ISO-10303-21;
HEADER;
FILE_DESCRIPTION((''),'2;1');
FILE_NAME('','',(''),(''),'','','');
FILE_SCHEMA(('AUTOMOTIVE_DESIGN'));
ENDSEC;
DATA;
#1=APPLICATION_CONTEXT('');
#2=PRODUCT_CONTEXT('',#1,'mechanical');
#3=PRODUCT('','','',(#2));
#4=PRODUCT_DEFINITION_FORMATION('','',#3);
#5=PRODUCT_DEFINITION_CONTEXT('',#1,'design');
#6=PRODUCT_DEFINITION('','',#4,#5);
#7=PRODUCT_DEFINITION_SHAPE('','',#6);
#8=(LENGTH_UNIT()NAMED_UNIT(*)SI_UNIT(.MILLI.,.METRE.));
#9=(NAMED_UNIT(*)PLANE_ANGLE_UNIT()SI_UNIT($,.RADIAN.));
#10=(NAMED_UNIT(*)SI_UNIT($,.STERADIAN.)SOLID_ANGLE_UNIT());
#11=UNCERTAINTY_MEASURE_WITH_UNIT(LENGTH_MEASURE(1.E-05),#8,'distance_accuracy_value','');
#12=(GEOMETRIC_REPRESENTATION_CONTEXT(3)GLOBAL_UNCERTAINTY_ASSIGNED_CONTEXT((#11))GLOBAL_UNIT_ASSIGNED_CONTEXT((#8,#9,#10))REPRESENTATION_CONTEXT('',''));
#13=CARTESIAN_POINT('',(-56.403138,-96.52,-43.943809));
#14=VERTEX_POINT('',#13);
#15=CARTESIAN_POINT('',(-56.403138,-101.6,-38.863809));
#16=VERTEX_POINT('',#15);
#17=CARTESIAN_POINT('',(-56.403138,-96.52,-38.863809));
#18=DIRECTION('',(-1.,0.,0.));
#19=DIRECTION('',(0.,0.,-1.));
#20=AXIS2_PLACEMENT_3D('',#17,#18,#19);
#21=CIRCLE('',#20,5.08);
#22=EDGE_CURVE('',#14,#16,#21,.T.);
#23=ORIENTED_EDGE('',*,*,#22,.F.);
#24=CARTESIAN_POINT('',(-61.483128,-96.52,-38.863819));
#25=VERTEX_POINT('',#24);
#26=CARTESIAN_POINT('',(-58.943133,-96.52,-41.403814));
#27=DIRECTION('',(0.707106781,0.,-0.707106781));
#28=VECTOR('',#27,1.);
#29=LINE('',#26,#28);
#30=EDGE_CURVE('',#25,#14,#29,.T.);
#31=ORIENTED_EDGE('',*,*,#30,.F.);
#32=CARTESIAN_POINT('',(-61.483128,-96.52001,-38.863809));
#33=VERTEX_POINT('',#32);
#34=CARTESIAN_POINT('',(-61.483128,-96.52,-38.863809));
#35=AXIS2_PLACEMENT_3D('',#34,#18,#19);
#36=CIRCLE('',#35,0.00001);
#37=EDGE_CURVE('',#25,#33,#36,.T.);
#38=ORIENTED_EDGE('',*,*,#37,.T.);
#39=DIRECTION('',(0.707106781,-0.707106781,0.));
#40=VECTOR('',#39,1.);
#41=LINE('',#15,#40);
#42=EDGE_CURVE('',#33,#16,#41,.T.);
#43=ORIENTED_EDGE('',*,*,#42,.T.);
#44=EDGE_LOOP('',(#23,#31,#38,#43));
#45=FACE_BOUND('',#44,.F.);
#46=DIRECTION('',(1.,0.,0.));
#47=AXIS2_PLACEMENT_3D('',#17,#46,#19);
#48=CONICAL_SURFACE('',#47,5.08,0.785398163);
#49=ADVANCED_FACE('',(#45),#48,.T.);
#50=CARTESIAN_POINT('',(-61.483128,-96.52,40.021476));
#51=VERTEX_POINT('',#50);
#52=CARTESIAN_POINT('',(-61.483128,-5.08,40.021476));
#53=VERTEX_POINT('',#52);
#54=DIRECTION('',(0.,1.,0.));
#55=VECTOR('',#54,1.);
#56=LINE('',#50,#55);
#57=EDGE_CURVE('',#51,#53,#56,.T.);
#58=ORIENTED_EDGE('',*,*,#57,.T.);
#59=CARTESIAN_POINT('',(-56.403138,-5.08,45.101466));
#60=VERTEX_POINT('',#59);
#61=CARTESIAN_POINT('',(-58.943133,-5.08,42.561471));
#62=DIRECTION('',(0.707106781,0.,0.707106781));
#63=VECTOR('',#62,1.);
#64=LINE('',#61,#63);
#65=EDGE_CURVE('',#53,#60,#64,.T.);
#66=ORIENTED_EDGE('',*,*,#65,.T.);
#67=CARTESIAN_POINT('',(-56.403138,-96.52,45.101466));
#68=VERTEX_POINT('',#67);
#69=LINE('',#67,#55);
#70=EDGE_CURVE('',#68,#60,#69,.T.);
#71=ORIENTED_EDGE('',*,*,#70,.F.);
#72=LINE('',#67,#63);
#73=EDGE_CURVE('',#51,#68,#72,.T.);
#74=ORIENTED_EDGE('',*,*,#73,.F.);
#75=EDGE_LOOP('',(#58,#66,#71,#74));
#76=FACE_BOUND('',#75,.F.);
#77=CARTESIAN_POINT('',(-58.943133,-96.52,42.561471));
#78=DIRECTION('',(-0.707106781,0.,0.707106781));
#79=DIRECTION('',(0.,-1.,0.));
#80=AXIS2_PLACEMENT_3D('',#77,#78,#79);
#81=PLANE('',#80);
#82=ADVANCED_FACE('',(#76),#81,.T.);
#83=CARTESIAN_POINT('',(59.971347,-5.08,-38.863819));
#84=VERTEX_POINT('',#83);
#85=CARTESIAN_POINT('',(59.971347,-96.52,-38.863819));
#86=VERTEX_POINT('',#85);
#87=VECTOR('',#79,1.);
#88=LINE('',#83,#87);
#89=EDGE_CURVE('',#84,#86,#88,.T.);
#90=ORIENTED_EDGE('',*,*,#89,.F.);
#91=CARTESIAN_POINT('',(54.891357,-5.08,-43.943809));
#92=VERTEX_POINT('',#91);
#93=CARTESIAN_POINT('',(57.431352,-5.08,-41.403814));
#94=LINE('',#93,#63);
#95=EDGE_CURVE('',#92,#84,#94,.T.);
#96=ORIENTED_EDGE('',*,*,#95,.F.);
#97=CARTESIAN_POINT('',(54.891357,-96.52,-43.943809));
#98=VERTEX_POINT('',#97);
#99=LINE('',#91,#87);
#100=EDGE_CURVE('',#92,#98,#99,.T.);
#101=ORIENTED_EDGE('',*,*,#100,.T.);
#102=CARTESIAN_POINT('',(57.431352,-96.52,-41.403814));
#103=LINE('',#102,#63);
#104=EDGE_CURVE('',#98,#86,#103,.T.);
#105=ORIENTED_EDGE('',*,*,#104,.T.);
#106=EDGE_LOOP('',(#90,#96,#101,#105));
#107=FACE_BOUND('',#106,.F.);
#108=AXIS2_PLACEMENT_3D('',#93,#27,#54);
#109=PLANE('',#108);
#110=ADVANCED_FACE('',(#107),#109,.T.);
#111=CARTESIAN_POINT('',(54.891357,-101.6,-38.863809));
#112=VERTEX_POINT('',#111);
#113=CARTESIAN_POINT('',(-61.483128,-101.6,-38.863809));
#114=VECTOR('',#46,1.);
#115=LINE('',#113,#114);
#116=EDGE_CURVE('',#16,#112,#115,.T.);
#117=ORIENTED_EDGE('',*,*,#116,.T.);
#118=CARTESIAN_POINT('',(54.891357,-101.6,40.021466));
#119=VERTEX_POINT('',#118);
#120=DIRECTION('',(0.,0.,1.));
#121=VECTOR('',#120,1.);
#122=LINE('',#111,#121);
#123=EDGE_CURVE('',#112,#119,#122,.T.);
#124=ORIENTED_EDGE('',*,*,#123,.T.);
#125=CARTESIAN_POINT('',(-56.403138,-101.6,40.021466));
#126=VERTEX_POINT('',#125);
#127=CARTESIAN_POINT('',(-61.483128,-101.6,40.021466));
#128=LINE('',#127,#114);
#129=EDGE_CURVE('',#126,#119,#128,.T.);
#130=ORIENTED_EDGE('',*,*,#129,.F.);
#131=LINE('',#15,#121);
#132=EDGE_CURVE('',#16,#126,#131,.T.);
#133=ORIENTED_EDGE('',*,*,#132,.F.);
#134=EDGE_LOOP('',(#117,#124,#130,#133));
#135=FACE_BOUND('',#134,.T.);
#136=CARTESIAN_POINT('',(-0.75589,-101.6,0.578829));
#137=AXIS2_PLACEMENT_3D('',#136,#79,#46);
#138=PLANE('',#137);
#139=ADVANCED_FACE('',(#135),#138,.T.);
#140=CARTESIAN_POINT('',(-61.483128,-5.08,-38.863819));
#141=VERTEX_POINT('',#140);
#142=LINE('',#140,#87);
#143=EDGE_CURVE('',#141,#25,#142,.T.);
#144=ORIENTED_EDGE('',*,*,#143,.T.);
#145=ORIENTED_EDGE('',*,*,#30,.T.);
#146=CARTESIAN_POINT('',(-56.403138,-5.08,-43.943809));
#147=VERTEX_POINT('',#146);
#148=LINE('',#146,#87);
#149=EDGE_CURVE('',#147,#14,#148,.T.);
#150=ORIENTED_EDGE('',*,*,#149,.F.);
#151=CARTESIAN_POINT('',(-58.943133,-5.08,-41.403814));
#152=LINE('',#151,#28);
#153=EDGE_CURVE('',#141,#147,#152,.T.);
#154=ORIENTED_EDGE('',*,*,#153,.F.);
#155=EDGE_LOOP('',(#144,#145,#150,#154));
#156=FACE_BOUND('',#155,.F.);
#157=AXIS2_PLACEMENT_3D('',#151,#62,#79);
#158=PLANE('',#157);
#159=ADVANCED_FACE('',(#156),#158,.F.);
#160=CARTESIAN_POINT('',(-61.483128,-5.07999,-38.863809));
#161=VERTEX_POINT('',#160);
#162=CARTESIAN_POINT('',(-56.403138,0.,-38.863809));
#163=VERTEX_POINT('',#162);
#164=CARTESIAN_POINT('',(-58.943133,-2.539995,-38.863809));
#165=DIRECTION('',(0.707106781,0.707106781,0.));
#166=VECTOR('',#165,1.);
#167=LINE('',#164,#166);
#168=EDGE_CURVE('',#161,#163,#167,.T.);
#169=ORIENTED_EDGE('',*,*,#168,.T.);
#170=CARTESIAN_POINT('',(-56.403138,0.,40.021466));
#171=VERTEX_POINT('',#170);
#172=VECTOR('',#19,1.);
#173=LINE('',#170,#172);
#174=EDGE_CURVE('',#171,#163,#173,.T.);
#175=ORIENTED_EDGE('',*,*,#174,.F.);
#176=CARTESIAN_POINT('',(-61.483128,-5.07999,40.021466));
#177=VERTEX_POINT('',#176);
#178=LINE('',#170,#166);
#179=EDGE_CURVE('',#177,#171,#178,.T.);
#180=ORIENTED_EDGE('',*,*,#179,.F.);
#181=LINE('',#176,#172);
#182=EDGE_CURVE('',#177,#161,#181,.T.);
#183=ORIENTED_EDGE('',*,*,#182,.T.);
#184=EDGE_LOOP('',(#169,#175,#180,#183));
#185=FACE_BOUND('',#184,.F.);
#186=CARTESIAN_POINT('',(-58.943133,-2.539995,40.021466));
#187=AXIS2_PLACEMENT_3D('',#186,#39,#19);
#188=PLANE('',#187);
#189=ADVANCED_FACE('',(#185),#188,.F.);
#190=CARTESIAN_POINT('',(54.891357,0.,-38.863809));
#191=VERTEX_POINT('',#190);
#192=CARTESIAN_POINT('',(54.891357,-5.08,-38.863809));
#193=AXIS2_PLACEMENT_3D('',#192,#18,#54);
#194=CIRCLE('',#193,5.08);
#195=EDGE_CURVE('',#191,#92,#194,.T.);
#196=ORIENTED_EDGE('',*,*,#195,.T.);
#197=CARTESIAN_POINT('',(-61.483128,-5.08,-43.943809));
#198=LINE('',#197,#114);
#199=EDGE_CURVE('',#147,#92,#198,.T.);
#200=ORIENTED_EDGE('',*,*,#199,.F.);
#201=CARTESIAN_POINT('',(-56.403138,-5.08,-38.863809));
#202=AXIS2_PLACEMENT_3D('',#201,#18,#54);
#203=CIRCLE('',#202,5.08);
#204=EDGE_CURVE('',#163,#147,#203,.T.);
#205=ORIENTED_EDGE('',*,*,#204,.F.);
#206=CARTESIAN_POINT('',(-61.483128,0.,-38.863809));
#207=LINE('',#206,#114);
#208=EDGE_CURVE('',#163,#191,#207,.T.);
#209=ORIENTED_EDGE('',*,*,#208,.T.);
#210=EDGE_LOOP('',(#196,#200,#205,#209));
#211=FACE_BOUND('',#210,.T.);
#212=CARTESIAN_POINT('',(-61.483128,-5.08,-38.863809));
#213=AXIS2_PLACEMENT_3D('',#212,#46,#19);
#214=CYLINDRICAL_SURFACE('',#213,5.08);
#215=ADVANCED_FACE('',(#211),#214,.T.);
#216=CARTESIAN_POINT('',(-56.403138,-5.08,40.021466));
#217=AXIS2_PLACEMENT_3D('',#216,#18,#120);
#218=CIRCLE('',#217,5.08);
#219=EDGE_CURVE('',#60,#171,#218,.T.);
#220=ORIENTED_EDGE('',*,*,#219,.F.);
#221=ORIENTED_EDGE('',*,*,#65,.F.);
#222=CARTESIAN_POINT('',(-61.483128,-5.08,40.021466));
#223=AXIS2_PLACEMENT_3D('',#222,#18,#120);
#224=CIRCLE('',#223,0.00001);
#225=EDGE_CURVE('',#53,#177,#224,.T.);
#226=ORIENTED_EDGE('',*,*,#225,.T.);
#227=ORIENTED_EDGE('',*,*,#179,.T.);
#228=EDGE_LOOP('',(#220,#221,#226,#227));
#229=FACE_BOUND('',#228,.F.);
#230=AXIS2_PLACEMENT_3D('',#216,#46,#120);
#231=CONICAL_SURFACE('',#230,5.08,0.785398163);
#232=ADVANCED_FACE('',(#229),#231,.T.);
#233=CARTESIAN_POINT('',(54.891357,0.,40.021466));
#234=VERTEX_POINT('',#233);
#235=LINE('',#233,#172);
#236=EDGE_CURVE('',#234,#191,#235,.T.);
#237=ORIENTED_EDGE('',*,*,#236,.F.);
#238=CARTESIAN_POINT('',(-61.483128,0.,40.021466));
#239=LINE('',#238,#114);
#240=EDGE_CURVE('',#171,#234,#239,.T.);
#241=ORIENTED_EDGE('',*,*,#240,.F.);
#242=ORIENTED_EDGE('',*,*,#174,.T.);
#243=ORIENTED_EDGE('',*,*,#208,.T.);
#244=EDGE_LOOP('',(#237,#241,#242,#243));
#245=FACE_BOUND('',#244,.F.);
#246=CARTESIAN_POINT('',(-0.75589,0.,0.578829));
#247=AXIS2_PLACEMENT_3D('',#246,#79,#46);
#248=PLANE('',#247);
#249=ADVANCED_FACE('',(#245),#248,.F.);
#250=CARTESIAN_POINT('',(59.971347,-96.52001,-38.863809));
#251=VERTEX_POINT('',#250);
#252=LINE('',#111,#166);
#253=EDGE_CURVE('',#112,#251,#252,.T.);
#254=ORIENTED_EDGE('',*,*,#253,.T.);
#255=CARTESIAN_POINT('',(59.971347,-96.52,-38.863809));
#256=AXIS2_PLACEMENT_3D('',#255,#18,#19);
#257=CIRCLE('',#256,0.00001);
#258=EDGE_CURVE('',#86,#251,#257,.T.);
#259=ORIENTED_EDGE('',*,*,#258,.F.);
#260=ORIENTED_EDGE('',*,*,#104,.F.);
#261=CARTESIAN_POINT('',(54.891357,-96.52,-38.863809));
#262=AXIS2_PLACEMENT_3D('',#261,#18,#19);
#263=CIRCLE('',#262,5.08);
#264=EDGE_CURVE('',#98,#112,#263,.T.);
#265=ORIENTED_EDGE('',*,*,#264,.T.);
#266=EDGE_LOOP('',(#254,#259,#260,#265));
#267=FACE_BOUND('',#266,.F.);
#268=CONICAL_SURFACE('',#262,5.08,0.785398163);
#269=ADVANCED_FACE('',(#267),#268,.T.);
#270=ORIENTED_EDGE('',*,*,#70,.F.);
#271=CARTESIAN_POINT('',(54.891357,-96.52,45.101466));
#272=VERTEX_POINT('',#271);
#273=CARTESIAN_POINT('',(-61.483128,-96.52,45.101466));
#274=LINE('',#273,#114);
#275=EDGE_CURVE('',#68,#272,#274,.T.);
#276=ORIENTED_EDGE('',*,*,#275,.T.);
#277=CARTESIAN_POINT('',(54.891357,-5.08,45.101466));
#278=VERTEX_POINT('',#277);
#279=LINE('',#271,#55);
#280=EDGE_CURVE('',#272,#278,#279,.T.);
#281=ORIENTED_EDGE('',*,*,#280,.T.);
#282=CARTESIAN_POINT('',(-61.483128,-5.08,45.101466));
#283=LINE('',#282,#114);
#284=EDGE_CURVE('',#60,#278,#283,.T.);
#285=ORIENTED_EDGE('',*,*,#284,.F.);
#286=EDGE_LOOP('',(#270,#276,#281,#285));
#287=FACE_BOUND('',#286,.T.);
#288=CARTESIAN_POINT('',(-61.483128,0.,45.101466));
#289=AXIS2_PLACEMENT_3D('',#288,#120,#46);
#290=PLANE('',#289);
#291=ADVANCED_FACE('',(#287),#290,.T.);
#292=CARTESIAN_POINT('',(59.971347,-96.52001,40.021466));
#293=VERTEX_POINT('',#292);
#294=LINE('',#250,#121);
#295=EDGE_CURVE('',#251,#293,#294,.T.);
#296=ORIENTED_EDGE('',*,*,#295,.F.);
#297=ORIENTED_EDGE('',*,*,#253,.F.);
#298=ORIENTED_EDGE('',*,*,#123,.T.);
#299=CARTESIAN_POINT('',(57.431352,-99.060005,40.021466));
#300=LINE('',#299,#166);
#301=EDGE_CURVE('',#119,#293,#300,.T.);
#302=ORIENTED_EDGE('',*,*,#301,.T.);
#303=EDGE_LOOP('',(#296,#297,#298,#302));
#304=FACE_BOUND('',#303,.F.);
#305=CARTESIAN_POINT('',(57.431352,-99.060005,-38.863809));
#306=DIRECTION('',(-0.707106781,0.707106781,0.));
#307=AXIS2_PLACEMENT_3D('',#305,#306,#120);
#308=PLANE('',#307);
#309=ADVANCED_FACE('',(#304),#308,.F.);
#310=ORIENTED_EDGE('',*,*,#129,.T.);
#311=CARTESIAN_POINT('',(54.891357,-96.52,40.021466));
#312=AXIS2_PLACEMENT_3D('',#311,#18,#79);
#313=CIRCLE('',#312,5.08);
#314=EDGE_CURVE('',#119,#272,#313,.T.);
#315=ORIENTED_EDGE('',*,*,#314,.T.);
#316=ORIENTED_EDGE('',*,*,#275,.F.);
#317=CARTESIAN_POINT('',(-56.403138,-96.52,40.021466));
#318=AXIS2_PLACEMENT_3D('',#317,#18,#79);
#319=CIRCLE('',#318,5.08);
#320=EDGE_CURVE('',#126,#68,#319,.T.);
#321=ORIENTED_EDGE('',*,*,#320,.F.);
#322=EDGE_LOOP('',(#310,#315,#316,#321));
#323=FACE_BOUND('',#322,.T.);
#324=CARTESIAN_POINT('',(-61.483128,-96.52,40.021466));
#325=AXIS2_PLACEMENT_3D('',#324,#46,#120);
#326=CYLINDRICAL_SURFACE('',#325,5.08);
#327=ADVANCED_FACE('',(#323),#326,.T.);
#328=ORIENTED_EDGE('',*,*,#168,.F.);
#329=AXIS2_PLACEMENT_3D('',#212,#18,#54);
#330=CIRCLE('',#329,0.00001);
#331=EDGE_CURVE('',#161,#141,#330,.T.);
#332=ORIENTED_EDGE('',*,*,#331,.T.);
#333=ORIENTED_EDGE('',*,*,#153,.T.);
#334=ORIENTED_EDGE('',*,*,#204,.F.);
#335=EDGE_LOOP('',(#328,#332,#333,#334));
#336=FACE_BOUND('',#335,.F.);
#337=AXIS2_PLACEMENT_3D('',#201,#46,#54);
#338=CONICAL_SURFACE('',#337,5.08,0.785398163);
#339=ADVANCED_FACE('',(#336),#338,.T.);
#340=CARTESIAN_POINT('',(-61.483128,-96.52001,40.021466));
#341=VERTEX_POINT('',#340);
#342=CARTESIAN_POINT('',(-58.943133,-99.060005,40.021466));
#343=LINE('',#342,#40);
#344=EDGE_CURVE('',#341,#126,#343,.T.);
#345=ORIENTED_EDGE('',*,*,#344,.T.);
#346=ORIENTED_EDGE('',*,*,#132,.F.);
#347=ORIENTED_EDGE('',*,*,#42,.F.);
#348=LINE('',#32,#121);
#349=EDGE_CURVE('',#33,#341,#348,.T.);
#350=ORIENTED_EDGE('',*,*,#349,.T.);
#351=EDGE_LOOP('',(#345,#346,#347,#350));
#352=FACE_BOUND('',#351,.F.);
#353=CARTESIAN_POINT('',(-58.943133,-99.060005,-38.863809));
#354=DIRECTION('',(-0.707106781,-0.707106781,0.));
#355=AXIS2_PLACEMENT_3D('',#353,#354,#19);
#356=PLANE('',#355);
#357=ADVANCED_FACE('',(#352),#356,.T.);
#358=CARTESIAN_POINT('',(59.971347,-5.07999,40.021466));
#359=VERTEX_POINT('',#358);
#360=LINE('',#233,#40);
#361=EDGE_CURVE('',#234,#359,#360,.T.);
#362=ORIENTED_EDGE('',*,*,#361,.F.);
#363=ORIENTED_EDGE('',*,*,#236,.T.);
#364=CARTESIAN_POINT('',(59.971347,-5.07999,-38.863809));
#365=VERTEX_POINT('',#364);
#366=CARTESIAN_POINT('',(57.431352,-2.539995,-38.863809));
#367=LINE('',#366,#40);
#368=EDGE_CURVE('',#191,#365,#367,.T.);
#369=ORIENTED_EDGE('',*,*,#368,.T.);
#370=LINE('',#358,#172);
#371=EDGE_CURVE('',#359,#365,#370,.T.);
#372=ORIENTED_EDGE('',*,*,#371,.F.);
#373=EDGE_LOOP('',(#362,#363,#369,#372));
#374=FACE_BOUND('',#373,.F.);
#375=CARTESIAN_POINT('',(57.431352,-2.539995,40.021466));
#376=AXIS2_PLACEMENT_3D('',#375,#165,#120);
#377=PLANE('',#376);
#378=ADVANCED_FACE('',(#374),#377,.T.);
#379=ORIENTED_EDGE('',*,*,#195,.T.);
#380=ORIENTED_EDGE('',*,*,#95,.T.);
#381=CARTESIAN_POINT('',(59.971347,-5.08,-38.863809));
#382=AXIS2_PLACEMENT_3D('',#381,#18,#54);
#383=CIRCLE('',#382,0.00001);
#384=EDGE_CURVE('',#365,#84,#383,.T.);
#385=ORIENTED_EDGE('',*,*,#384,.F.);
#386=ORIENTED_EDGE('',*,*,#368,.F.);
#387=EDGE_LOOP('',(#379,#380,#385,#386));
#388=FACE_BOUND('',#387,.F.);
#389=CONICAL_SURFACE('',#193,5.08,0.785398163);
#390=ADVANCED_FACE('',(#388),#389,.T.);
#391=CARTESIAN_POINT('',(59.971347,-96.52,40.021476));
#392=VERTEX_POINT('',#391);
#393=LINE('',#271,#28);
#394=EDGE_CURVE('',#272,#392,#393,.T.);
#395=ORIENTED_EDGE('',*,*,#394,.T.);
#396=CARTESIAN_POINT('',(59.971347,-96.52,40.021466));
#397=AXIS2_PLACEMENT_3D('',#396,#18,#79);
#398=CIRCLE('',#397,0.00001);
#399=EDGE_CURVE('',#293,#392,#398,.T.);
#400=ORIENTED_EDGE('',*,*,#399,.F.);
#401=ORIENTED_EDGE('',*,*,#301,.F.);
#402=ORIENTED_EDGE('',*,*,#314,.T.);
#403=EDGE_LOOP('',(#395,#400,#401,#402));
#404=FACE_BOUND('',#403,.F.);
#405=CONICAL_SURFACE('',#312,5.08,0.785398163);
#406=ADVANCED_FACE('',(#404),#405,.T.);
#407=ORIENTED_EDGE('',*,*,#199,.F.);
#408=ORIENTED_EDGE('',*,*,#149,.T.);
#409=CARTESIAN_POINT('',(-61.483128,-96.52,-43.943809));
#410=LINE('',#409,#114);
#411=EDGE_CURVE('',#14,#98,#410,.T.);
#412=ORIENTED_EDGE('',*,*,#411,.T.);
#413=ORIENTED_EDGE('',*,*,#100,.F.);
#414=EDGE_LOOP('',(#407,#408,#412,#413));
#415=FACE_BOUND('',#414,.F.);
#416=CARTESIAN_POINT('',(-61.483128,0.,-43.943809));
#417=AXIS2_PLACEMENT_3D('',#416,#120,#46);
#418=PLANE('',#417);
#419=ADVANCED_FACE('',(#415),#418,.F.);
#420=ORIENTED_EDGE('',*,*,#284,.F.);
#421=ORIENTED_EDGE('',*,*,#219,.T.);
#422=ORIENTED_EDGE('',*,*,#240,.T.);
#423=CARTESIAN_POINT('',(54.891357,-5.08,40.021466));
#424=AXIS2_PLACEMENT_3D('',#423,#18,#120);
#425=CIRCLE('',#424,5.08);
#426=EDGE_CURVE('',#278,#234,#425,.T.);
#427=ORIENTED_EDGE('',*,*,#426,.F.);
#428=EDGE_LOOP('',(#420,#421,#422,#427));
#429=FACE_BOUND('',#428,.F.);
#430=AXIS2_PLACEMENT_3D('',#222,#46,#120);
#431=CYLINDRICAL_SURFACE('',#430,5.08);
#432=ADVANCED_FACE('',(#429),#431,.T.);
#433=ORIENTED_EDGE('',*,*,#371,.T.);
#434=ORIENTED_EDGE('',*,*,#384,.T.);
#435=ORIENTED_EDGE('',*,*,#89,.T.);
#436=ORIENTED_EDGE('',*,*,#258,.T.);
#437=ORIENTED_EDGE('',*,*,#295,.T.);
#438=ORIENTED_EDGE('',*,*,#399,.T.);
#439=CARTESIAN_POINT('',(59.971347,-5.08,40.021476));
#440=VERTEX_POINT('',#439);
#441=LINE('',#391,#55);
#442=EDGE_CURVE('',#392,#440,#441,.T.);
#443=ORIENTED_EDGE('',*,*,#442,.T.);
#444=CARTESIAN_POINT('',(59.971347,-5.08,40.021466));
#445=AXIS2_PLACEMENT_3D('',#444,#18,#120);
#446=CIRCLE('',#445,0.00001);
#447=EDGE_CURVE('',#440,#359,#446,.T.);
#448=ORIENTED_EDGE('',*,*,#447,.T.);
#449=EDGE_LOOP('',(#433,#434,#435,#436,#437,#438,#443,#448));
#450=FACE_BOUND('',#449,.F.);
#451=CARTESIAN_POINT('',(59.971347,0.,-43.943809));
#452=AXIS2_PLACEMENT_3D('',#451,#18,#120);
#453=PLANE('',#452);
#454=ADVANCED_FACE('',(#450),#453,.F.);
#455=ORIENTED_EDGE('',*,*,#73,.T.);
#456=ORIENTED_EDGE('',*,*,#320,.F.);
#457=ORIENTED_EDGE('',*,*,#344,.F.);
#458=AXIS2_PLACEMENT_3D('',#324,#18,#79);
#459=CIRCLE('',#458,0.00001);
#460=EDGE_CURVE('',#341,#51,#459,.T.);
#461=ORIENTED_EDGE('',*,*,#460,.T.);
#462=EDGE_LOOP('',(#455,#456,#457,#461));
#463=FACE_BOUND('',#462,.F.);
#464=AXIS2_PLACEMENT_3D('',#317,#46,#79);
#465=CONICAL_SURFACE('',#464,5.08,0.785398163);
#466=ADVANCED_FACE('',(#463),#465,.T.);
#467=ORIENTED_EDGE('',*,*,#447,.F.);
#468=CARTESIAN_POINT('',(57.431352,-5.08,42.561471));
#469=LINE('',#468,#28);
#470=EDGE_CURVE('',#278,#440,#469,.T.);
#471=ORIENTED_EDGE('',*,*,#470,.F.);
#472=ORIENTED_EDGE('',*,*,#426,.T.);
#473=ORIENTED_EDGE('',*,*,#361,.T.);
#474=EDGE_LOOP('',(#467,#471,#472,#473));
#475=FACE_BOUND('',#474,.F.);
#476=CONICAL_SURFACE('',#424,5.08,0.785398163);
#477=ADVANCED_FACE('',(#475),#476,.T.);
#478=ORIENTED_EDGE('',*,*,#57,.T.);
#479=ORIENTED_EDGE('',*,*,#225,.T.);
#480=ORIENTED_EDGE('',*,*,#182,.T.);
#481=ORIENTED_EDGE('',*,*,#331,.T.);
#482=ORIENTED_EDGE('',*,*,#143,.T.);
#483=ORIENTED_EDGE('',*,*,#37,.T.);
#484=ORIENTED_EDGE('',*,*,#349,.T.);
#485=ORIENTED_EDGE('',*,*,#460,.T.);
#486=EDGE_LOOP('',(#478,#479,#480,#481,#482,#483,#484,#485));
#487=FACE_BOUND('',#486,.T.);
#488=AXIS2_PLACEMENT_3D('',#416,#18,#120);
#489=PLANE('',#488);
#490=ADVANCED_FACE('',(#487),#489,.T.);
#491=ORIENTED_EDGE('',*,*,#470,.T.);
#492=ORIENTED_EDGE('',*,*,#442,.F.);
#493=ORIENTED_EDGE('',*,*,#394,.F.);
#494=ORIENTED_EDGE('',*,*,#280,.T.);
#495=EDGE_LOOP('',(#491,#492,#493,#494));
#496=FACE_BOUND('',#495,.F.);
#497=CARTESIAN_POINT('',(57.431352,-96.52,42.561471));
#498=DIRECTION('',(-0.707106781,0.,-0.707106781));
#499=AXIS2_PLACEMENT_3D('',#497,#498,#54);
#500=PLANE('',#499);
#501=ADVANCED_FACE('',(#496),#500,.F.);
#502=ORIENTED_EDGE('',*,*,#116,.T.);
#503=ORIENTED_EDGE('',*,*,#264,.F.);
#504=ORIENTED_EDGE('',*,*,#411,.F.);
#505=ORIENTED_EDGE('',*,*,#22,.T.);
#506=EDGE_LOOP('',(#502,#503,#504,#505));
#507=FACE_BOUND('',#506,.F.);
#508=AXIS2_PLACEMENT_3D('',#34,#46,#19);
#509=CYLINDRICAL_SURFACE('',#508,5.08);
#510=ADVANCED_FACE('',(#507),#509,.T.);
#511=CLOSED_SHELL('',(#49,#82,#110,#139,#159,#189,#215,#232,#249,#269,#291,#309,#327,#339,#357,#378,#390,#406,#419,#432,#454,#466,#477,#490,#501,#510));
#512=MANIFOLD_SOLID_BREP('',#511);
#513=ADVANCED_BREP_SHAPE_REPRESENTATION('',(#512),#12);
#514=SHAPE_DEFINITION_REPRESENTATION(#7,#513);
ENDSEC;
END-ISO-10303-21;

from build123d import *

# Parameters (mm, degrees)
F0_W     = 121.4544754475
F0_H     = 89.0452750027
F1_DEPTH = 101.6
F2_R     = 5.08
F3_SIZE  = 5.07999


# Not quite as in the source:
# - a fillet or chamfer is up to 0.001 mm smaller than in the source, because OpenCascade refuses the exact size


with BuildPart() as f1:
    # F0 (on Front) → F1 (new body)
    with BuildSketch(Plane.XZ):
        with Locations((-0.7558902726, 0.5788286217)):
            Rectangle(F0_W, F0_H)
    extrude(amount=F1_DEPTH)

    # F2
    f2_edges = [f1.edges().sort_by_distance(p)[0] for p in [
        (-0.75589, 0, 45.101466),
        (-0.75589, -101.6, 45.101466),
        (-0.75589, 0, -43.943809),
        (-0.75589, -101.6, -43.943809),
    ]]
    fillet(f2_edges, radius=F2_R)

    # F3 (size 5.08 in the source; OpenCascade refuses exactly that, so slightly less here)
    f3_edges = [f1.edges().sort_by_distance(p)[0] for p in [
        (59.971347, -50.8, -43.943809),
        (-61.483128, -50.8, -43.943809),
        (59.971347, -50.8, 45.101466),
        (-61.483128, -50.8, 45.101466),
    ]]
    chamfer(f3_edges, length=F3_SIZE)


solid = f1.part
